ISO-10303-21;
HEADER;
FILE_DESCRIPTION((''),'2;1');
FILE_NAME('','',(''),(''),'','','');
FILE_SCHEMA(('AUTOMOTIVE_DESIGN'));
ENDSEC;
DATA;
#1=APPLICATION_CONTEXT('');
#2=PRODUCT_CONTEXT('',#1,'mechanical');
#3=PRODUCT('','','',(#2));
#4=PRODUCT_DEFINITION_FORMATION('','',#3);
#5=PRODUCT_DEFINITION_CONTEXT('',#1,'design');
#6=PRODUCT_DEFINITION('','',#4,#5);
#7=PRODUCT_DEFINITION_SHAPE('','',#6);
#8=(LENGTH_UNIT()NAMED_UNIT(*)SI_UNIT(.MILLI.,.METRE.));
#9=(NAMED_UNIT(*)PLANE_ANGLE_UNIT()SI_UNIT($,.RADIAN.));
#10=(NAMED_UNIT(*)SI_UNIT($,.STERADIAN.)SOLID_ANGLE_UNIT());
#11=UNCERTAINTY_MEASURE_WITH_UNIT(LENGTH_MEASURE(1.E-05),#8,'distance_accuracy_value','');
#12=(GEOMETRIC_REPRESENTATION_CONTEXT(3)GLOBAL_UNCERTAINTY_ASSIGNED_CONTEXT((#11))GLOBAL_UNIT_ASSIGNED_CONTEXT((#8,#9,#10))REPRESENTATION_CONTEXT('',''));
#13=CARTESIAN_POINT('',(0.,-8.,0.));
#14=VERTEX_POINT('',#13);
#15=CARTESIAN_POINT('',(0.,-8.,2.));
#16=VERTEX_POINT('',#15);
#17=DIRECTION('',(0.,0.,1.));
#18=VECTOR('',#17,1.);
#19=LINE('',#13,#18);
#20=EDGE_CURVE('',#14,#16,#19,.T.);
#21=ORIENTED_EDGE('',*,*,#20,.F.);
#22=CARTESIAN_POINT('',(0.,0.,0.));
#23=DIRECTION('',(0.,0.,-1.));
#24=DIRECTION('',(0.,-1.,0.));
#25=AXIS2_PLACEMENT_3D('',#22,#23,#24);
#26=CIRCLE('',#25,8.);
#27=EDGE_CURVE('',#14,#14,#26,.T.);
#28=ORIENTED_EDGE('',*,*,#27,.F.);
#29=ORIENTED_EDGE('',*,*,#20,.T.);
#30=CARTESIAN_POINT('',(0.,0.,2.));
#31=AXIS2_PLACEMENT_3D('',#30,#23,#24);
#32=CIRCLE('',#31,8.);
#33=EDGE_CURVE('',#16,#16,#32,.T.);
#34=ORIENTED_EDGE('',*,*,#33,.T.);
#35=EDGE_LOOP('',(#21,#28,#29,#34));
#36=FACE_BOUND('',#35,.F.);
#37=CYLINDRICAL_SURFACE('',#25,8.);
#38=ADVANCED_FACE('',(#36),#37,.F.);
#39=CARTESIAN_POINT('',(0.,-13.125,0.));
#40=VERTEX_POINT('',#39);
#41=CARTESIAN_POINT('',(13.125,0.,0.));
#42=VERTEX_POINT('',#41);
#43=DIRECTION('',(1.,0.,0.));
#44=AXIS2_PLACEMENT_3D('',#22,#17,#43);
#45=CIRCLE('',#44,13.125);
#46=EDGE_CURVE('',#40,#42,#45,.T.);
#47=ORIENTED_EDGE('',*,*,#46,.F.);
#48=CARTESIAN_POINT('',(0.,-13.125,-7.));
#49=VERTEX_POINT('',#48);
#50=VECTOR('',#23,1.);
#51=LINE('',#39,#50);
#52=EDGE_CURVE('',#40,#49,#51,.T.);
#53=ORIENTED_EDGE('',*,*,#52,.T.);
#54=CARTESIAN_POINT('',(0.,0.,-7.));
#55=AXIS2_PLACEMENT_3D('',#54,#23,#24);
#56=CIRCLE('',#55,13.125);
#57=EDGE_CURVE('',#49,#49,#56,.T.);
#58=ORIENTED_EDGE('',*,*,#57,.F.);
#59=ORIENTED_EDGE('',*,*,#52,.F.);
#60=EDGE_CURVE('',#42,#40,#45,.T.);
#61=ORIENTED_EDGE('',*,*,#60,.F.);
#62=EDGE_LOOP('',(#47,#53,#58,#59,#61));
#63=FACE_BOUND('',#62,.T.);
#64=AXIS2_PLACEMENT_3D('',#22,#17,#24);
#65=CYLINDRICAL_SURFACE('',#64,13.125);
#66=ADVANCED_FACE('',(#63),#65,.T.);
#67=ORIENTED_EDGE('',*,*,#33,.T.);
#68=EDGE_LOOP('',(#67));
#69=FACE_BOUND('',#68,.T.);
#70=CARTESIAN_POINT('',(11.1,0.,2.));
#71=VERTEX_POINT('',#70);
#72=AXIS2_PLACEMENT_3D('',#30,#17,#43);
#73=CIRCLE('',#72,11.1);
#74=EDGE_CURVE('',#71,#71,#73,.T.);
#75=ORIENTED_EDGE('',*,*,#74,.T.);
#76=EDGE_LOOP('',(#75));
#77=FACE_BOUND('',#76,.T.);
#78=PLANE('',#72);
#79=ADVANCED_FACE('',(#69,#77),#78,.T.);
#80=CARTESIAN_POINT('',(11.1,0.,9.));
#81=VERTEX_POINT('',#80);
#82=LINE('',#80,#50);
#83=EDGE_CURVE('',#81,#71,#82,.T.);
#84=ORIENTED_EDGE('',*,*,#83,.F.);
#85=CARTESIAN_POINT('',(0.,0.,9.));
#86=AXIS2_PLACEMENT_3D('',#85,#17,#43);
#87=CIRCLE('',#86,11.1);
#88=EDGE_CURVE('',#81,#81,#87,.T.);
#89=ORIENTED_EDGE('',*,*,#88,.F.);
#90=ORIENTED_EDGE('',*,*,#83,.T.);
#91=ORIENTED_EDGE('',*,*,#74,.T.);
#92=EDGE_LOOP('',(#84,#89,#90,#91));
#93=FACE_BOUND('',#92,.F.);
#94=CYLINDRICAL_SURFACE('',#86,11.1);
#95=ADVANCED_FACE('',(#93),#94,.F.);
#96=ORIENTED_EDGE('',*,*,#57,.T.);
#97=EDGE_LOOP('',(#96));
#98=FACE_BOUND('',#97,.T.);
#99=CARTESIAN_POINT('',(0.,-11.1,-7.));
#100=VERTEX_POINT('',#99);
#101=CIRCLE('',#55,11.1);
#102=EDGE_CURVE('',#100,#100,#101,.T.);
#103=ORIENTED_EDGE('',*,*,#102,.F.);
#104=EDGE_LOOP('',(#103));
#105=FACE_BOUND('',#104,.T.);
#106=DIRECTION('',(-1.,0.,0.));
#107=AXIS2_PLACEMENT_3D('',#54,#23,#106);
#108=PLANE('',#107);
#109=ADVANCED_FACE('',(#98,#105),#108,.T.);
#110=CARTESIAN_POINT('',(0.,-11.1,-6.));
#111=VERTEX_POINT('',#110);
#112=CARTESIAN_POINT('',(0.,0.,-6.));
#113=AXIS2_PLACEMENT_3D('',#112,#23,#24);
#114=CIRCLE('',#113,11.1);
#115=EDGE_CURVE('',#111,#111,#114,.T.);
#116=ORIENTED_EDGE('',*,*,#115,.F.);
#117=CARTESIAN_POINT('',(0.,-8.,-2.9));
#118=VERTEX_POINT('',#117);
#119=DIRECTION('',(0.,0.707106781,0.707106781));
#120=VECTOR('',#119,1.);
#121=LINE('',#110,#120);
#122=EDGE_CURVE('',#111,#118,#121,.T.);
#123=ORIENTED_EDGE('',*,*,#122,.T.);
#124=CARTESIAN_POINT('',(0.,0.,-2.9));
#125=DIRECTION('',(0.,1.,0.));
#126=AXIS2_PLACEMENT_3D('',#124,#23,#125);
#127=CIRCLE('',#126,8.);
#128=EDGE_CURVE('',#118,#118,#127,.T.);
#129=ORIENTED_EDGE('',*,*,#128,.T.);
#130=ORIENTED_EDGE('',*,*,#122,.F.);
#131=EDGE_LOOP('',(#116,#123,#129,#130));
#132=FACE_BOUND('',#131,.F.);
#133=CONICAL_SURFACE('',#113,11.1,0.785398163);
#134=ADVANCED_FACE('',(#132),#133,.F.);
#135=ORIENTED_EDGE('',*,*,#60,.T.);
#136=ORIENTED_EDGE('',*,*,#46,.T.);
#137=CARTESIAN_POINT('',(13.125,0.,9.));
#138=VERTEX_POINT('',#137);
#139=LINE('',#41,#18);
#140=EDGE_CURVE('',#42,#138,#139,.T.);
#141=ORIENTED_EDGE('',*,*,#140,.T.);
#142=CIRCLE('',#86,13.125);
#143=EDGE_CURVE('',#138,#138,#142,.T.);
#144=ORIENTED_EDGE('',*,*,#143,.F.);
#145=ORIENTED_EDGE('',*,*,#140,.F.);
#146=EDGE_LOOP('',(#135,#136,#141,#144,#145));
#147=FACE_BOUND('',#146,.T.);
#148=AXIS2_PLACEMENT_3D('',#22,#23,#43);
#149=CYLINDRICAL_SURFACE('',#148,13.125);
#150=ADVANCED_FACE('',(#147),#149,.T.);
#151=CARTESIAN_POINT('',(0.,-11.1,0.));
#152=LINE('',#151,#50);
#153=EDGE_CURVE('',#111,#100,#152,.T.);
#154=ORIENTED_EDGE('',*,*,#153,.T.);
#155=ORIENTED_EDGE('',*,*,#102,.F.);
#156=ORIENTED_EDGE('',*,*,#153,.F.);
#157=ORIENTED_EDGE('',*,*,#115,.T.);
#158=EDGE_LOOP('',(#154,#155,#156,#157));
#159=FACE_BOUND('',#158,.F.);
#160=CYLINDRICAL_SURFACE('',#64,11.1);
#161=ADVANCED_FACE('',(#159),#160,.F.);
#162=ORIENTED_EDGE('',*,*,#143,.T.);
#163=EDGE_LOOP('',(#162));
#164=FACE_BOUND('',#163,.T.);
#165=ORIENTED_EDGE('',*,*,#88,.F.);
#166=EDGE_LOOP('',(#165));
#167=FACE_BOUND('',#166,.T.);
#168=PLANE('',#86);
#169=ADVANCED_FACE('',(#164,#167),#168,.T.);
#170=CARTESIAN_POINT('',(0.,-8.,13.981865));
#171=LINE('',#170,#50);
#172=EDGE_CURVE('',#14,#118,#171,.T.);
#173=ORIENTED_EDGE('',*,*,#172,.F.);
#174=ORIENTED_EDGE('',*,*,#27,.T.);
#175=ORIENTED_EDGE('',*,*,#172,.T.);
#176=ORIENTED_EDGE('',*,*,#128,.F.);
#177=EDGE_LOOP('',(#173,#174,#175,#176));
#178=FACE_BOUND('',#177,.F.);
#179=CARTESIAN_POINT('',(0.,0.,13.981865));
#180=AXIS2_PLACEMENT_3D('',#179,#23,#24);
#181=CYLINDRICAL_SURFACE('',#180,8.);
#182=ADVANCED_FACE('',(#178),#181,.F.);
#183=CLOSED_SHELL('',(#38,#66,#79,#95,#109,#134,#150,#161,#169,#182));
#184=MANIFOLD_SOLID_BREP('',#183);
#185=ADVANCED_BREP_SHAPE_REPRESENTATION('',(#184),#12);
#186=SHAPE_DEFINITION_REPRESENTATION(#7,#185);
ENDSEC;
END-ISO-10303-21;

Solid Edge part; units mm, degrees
sketch "Sketch1" plane through (0, 0, 0) normal (0, 0, 1) x (1, 0, 0)
  circle A0 centre (0, 0) radius 13.125
extrude "Protrusion1" add sketch "Sketch1" along normal blind 9
sketch "Sketch2" plane through (0, 0, 9) normal (0, 0, 1) x (1, 0, 0)
  circle A0 centre (0, 0) radius 11.1
extrude "ExtrudedCutout_1" cut sketch "Sketch2" against normal blind 7
sketch "Sketch3" plane through (0, 0, 0) normal (0, 0, -1) x (0, -1, 0)
  circle A0 centre (0, 0) radius 8
  dimension "D1" = 16
extrude "Cutout1" cut sketch "Sketch3" against normal through all
sketch "Sketch4" plane through (0, 0, 0) normal (0, 0, -1) x (0, -1, 0)
  circle A0 centre (0, 0) radius 11.1
  circle A1 centre (0, 0) radius 13.125
extrude "ExtrudedProtrusion_3" add sketch "Sketch4" along normal blind 7
chamfer "Chamfer_1" distance 6 angle 45 1 edges at (0, 11.1, 0)
